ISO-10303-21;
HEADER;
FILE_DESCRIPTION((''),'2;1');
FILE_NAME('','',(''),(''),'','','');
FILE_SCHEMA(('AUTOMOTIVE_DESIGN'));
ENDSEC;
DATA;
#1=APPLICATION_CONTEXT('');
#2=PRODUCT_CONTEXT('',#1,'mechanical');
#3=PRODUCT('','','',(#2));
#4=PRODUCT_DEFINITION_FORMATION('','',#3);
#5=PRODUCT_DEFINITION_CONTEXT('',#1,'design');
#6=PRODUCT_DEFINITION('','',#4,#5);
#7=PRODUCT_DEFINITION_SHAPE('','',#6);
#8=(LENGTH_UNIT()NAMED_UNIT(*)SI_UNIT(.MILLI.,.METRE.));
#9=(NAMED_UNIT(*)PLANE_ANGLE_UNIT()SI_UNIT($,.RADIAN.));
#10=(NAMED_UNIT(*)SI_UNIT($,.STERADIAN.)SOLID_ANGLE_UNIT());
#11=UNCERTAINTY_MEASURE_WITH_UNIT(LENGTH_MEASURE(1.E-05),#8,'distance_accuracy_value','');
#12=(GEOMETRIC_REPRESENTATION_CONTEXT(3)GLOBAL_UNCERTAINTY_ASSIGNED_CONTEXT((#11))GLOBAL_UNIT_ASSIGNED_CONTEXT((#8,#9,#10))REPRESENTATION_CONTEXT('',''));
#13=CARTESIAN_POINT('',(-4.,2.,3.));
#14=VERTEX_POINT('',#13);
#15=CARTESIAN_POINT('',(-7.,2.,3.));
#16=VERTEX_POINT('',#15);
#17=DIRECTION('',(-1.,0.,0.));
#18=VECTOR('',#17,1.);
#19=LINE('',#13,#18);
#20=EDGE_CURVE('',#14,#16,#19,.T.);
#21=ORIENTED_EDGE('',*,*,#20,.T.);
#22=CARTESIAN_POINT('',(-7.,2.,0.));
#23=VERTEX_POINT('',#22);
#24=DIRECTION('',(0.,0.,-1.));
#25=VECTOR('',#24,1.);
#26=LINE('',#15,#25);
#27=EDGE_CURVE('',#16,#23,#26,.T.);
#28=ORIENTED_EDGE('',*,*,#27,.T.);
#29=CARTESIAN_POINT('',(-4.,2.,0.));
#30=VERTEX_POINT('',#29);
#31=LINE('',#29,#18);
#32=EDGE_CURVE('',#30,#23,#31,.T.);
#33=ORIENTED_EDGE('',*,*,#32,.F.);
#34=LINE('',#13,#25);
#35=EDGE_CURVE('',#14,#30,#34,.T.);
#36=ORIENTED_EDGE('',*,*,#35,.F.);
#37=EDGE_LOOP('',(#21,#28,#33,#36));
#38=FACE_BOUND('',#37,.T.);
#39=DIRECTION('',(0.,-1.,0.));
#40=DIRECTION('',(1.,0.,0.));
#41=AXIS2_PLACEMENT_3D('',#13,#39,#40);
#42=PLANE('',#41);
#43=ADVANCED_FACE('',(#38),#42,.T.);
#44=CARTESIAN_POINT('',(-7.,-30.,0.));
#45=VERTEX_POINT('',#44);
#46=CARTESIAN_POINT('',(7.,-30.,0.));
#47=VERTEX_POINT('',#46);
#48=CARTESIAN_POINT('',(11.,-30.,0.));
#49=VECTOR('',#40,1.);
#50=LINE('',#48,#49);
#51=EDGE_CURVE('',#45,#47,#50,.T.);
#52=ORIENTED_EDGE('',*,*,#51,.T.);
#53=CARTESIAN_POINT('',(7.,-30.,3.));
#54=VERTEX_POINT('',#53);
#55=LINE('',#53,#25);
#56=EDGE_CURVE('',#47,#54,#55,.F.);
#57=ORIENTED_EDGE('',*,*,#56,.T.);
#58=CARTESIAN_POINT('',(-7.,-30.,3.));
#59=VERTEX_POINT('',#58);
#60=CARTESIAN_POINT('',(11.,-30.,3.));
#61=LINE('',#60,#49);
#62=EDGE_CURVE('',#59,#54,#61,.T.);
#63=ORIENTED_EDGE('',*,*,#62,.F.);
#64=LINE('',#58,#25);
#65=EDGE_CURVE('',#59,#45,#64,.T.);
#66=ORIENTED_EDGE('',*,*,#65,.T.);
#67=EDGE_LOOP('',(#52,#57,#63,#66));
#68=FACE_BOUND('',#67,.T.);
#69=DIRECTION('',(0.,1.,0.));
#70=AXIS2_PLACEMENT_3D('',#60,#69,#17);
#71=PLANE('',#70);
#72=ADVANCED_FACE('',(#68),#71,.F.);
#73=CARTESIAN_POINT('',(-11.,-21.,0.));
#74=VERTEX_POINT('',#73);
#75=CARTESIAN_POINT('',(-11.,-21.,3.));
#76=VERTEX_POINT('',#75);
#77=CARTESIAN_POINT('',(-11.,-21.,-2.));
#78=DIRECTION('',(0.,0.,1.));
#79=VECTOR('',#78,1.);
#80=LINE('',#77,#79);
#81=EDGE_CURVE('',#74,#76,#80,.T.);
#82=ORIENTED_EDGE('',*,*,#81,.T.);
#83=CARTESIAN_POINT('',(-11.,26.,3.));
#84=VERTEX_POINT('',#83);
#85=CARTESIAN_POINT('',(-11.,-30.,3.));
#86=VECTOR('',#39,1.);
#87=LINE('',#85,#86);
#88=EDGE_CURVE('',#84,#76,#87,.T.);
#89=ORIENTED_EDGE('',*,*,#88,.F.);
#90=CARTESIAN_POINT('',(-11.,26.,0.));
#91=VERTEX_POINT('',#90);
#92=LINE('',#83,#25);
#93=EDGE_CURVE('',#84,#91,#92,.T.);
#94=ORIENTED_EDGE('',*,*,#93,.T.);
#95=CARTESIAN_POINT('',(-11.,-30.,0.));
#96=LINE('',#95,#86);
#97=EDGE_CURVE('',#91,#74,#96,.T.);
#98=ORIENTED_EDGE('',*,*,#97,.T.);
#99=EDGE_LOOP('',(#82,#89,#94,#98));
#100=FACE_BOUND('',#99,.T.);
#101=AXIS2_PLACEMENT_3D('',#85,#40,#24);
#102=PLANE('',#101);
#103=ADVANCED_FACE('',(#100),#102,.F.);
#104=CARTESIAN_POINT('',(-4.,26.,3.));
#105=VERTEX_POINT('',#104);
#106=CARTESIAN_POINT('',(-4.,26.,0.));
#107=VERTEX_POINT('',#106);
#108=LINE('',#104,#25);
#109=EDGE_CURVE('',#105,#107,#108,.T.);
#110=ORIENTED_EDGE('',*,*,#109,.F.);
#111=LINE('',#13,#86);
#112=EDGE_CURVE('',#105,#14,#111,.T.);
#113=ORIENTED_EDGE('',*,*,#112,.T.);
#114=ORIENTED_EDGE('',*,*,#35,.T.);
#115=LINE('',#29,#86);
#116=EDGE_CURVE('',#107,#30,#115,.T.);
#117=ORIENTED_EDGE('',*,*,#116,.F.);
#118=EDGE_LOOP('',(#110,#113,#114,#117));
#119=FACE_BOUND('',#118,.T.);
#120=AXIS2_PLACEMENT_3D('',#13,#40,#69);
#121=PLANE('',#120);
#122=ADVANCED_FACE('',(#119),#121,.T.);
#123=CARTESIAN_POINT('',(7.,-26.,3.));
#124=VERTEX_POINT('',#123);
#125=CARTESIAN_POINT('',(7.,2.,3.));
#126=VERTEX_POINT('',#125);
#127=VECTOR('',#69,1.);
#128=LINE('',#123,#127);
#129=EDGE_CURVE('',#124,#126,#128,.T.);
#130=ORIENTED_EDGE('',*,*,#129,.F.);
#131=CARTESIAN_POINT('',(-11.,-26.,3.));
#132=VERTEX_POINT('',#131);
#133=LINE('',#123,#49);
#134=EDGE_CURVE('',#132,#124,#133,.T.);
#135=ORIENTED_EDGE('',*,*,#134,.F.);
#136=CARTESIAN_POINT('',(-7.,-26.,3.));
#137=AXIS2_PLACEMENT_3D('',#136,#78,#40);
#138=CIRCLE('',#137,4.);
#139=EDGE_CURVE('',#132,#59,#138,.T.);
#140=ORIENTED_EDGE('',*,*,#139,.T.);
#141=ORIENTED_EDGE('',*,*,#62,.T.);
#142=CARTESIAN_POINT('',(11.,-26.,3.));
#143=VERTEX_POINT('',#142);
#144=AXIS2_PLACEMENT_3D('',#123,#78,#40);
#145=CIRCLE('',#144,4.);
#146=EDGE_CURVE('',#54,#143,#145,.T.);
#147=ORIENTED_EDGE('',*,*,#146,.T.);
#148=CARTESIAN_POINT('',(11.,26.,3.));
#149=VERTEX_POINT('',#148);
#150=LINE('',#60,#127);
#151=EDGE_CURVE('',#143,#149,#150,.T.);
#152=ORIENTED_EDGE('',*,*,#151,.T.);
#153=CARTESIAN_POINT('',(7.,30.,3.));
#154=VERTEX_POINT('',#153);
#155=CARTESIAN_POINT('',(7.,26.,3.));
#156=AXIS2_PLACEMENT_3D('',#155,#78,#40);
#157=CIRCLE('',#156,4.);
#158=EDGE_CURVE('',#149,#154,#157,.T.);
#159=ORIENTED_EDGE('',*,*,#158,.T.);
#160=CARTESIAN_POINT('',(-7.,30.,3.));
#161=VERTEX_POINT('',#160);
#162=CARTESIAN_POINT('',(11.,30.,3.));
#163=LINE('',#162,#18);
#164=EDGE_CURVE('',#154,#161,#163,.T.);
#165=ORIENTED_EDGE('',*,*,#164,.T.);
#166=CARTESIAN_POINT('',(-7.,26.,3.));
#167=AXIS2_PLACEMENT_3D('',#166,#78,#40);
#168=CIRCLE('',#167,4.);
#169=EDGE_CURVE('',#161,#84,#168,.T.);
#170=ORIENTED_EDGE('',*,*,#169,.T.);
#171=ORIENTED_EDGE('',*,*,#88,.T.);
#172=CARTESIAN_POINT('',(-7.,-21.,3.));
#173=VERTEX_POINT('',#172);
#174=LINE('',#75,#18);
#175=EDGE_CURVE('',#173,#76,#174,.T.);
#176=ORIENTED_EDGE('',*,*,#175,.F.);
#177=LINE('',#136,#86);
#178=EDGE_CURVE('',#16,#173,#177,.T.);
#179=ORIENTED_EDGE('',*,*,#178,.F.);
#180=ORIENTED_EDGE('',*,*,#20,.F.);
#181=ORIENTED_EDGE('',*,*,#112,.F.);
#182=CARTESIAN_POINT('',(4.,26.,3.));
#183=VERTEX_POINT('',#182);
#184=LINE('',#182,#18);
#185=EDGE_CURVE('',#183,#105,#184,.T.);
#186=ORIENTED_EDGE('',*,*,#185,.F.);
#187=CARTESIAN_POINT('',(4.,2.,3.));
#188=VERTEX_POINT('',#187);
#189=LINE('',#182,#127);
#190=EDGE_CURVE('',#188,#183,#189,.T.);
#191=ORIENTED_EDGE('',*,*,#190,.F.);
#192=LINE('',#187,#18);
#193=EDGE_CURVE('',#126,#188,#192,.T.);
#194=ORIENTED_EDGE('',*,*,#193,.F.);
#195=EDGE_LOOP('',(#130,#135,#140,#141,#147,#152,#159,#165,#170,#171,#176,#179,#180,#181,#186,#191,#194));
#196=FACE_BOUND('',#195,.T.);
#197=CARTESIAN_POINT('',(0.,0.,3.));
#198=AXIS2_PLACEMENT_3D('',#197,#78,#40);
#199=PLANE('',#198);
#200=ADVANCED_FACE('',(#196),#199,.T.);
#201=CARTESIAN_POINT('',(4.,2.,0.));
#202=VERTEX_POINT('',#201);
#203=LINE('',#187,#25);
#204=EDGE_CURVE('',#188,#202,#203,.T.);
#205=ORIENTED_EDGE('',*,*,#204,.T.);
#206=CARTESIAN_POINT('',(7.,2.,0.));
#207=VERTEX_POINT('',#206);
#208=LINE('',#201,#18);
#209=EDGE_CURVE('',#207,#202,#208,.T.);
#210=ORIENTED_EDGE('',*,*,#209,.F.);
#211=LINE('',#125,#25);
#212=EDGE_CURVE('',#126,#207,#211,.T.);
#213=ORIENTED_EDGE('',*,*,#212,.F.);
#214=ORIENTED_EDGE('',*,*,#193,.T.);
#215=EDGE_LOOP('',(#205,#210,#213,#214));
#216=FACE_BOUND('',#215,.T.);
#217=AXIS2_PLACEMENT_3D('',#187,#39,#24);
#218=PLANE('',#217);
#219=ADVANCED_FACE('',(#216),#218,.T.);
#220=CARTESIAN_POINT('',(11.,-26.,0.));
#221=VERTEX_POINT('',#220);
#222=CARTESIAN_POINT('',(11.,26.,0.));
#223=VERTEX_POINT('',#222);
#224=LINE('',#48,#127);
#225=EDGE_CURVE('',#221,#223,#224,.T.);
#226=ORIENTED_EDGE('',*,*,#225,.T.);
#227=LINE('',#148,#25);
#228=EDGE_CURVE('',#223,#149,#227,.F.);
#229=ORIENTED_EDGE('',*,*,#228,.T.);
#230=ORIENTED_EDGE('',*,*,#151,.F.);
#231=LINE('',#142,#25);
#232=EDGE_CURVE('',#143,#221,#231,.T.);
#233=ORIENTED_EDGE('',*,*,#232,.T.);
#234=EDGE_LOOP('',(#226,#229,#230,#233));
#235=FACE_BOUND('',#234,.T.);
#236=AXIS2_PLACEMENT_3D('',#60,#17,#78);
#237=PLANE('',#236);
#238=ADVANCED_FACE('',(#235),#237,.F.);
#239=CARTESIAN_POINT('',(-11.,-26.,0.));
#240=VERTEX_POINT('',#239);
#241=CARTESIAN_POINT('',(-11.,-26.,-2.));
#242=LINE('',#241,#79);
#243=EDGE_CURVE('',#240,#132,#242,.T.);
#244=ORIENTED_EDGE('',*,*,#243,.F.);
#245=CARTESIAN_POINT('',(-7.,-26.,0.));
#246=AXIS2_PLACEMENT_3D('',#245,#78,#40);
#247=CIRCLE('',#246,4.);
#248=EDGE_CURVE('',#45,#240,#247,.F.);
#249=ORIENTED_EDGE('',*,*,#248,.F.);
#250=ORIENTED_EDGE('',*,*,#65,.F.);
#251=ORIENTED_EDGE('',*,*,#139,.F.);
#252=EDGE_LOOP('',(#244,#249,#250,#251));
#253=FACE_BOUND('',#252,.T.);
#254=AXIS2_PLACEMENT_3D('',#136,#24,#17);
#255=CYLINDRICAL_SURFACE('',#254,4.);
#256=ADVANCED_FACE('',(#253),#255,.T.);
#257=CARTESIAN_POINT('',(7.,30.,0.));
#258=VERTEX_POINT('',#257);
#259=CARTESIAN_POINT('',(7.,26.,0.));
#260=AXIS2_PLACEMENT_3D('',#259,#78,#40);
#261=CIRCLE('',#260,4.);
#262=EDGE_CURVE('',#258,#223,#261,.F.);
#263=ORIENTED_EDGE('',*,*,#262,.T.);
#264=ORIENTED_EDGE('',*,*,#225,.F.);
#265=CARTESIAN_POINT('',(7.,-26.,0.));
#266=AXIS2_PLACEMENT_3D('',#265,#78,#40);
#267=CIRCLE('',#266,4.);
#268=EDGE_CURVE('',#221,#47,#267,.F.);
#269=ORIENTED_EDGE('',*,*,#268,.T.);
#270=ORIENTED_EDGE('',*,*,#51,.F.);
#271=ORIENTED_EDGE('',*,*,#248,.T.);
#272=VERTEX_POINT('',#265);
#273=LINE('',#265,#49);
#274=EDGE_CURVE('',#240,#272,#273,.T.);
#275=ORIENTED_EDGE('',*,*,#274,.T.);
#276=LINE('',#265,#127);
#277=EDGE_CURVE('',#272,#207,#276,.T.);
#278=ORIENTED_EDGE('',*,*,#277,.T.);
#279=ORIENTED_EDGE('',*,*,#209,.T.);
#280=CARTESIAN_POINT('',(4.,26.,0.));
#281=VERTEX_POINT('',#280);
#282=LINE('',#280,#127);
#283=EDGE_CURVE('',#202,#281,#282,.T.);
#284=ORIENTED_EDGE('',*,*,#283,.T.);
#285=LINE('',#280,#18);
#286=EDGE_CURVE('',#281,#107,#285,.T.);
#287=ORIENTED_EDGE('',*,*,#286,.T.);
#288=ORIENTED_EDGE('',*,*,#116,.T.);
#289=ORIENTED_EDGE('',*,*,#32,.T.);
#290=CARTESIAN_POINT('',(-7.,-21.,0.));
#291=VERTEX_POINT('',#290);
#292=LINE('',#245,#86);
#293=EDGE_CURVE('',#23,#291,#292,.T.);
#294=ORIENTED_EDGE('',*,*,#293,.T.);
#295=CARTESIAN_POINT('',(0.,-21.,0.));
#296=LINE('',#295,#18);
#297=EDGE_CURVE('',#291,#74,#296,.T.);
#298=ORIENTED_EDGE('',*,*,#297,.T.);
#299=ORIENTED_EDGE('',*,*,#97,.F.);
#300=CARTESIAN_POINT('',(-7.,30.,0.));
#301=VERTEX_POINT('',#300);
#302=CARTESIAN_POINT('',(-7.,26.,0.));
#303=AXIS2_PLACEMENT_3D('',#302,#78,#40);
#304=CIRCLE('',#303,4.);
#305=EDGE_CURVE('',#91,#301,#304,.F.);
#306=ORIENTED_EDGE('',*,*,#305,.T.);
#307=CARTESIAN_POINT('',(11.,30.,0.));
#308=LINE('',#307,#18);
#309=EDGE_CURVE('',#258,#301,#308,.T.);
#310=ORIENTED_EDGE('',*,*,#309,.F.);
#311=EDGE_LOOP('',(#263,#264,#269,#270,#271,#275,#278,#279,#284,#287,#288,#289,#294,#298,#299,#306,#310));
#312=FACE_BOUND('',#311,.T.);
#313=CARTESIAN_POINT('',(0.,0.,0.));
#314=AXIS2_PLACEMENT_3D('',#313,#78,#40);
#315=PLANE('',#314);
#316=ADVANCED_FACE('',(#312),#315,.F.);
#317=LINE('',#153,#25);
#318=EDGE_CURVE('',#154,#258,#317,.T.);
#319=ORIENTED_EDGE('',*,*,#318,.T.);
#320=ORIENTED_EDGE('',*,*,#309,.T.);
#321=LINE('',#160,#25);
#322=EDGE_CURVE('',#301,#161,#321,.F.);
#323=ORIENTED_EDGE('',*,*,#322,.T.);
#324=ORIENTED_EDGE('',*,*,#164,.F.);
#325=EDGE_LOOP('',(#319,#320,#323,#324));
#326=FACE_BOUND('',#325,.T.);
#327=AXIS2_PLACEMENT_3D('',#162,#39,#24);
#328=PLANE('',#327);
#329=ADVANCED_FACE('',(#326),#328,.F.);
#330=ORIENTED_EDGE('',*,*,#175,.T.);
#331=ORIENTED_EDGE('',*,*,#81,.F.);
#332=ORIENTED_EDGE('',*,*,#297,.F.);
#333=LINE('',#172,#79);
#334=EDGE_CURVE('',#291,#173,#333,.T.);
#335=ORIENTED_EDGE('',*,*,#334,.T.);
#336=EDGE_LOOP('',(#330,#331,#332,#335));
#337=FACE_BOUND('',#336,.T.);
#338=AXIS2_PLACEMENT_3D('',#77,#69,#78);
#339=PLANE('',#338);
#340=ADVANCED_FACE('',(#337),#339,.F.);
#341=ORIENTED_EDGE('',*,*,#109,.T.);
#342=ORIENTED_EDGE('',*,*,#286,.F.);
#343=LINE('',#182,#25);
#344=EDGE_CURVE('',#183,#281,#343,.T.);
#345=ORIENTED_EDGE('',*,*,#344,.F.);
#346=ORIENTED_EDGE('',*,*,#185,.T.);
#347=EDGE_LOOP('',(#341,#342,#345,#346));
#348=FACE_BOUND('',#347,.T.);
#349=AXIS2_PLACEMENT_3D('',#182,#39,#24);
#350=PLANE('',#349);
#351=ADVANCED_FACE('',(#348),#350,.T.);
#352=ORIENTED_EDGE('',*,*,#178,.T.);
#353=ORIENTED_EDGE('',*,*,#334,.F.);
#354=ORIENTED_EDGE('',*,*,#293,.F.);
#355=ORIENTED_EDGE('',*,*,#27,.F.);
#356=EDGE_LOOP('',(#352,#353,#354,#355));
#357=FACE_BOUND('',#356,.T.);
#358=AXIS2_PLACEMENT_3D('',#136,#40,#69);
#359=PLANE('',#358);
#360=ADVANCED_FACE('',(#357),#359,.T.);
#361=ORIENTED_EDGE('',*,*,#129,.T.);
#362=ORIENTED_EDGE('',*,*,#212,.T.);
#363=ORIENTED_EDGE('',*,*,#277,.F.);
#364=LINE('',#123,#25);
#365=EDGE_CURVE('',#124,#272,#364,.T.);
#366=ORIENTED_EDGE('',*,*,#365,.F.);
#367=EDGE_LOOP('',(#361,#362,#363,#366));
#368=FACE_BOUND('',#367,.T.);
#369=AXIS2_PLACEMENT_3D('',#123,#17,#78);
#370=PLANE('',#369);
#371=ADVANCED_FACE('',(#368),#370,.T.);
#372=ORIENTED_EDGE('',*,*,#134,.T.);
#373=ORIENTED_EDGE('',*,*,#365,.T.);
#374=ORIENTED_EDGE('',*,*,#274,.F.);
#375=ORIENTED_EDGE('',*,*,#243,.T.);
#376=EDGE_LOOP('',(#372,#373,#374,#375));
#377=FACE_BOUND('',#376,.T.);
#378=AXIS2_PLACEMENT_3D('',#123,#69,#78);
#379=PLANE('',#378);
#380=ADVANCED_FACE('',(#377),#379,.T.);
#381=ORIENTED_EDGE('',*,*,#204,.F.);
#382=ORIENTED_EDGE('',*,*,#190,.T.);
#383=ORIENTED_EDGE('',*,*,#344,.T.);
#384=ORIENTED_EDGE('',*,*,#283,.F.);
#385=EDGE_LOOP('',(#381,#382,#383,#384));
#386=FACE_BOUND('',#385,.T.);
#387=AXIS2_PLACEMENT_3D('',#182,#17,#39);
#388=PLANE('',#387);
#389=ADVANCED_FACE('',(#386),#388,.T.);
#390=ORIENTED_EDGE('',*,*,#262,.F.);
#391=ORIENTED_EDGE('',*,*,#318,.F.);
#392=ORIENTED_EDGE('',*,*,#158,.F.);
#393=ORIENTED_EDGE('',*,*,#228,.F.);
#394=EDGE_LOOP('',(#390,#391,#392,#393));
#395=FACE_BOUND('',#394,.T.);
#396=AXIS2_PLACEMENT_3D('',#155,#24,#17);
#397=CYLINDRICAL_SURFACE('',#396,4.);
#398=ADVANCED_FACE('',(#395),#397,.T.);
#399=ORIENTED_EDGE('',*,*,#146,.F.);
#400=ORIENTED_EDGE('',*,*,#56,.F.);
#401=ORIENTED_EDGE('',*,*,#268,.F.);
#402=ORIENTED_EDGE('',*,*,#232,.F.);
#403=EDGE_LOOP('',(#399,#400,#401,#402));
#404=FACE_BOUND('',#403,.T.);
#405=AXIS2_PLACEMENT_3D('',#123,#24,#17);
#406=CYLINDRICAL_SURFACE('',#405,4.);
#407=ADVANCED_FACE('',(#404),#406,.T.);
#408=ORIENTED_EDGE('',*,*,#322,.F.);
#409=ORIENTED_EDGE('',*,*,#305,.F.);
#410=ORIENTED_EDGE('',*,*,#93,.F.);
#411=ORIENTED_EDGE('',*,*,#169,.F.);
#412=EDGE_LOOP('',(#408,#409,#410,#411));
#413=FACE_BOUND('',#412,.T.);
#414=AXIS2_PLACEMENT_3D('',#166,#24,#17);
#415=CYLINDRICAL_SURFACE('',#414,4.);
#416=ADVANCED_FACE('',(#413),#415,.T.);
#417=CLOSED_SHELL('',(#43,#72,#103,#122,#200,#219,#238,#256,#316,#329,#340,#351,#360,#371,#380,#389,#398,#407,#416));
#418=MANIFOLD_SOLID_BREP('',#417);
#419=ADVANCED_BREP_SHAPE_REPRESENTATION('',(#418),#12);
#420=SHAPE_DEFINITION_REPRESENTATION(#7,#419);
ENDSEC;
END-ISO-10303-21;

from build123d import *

# Parameters (mm, degrees)
SKETCH_1_W          = 22
SKETCH_1_H          = 60
EXTRUDE_2_DEPTH     = 3
SKETCH_2_W          = 4
SKETCH_2_H          = 5
CUT_EXTRUDE_1_DEPTH = 5
FILLET_1_R          = 4


with BuildPart() as part:
    # Эскиз1 → Бобышка-Вытянуть2 (new body)
    with BuildSketch(Plane.XY):
        Rectangle(SKETCH_1_W, SKETCH_1_H)
        Polygon((4, 26), (-4, 26), (-4, 2), (-7, 2), (-7, -26), (7, -26), (7, 2), (4, 2), align=None, mode=Mode.SUBTRACT)
    extrude(amount=EXTRUDE_2_DEPTH)

    # Эскиз2 → Вырез-Вытянуть1 (cut)
    with BuildSketch(Plane.XY.offset(3)):
        with Locations((-9, -23.5)):
            Rectangle(SKETCH_2_W, SKETCH_2_H)
    extrude(amount=-CUT_EXTRUDE_1_DEPTH, mode=Mode.SUBTRACT)

    # Скругление1
    fillet_1_edges = [part.edges().sort_by_distance(p)[0] for p in [
        (-11, 30, 1.5),
        (11, 30, 1.5),
        (11, -30, 1.5),
        (-11, -30, 1.5),
    ]]
    fillet(fillet_1_edges, radius=FILLET_1_R - 0.0001)  # a hair under: the kernel refuses the full size


solid = part.part
